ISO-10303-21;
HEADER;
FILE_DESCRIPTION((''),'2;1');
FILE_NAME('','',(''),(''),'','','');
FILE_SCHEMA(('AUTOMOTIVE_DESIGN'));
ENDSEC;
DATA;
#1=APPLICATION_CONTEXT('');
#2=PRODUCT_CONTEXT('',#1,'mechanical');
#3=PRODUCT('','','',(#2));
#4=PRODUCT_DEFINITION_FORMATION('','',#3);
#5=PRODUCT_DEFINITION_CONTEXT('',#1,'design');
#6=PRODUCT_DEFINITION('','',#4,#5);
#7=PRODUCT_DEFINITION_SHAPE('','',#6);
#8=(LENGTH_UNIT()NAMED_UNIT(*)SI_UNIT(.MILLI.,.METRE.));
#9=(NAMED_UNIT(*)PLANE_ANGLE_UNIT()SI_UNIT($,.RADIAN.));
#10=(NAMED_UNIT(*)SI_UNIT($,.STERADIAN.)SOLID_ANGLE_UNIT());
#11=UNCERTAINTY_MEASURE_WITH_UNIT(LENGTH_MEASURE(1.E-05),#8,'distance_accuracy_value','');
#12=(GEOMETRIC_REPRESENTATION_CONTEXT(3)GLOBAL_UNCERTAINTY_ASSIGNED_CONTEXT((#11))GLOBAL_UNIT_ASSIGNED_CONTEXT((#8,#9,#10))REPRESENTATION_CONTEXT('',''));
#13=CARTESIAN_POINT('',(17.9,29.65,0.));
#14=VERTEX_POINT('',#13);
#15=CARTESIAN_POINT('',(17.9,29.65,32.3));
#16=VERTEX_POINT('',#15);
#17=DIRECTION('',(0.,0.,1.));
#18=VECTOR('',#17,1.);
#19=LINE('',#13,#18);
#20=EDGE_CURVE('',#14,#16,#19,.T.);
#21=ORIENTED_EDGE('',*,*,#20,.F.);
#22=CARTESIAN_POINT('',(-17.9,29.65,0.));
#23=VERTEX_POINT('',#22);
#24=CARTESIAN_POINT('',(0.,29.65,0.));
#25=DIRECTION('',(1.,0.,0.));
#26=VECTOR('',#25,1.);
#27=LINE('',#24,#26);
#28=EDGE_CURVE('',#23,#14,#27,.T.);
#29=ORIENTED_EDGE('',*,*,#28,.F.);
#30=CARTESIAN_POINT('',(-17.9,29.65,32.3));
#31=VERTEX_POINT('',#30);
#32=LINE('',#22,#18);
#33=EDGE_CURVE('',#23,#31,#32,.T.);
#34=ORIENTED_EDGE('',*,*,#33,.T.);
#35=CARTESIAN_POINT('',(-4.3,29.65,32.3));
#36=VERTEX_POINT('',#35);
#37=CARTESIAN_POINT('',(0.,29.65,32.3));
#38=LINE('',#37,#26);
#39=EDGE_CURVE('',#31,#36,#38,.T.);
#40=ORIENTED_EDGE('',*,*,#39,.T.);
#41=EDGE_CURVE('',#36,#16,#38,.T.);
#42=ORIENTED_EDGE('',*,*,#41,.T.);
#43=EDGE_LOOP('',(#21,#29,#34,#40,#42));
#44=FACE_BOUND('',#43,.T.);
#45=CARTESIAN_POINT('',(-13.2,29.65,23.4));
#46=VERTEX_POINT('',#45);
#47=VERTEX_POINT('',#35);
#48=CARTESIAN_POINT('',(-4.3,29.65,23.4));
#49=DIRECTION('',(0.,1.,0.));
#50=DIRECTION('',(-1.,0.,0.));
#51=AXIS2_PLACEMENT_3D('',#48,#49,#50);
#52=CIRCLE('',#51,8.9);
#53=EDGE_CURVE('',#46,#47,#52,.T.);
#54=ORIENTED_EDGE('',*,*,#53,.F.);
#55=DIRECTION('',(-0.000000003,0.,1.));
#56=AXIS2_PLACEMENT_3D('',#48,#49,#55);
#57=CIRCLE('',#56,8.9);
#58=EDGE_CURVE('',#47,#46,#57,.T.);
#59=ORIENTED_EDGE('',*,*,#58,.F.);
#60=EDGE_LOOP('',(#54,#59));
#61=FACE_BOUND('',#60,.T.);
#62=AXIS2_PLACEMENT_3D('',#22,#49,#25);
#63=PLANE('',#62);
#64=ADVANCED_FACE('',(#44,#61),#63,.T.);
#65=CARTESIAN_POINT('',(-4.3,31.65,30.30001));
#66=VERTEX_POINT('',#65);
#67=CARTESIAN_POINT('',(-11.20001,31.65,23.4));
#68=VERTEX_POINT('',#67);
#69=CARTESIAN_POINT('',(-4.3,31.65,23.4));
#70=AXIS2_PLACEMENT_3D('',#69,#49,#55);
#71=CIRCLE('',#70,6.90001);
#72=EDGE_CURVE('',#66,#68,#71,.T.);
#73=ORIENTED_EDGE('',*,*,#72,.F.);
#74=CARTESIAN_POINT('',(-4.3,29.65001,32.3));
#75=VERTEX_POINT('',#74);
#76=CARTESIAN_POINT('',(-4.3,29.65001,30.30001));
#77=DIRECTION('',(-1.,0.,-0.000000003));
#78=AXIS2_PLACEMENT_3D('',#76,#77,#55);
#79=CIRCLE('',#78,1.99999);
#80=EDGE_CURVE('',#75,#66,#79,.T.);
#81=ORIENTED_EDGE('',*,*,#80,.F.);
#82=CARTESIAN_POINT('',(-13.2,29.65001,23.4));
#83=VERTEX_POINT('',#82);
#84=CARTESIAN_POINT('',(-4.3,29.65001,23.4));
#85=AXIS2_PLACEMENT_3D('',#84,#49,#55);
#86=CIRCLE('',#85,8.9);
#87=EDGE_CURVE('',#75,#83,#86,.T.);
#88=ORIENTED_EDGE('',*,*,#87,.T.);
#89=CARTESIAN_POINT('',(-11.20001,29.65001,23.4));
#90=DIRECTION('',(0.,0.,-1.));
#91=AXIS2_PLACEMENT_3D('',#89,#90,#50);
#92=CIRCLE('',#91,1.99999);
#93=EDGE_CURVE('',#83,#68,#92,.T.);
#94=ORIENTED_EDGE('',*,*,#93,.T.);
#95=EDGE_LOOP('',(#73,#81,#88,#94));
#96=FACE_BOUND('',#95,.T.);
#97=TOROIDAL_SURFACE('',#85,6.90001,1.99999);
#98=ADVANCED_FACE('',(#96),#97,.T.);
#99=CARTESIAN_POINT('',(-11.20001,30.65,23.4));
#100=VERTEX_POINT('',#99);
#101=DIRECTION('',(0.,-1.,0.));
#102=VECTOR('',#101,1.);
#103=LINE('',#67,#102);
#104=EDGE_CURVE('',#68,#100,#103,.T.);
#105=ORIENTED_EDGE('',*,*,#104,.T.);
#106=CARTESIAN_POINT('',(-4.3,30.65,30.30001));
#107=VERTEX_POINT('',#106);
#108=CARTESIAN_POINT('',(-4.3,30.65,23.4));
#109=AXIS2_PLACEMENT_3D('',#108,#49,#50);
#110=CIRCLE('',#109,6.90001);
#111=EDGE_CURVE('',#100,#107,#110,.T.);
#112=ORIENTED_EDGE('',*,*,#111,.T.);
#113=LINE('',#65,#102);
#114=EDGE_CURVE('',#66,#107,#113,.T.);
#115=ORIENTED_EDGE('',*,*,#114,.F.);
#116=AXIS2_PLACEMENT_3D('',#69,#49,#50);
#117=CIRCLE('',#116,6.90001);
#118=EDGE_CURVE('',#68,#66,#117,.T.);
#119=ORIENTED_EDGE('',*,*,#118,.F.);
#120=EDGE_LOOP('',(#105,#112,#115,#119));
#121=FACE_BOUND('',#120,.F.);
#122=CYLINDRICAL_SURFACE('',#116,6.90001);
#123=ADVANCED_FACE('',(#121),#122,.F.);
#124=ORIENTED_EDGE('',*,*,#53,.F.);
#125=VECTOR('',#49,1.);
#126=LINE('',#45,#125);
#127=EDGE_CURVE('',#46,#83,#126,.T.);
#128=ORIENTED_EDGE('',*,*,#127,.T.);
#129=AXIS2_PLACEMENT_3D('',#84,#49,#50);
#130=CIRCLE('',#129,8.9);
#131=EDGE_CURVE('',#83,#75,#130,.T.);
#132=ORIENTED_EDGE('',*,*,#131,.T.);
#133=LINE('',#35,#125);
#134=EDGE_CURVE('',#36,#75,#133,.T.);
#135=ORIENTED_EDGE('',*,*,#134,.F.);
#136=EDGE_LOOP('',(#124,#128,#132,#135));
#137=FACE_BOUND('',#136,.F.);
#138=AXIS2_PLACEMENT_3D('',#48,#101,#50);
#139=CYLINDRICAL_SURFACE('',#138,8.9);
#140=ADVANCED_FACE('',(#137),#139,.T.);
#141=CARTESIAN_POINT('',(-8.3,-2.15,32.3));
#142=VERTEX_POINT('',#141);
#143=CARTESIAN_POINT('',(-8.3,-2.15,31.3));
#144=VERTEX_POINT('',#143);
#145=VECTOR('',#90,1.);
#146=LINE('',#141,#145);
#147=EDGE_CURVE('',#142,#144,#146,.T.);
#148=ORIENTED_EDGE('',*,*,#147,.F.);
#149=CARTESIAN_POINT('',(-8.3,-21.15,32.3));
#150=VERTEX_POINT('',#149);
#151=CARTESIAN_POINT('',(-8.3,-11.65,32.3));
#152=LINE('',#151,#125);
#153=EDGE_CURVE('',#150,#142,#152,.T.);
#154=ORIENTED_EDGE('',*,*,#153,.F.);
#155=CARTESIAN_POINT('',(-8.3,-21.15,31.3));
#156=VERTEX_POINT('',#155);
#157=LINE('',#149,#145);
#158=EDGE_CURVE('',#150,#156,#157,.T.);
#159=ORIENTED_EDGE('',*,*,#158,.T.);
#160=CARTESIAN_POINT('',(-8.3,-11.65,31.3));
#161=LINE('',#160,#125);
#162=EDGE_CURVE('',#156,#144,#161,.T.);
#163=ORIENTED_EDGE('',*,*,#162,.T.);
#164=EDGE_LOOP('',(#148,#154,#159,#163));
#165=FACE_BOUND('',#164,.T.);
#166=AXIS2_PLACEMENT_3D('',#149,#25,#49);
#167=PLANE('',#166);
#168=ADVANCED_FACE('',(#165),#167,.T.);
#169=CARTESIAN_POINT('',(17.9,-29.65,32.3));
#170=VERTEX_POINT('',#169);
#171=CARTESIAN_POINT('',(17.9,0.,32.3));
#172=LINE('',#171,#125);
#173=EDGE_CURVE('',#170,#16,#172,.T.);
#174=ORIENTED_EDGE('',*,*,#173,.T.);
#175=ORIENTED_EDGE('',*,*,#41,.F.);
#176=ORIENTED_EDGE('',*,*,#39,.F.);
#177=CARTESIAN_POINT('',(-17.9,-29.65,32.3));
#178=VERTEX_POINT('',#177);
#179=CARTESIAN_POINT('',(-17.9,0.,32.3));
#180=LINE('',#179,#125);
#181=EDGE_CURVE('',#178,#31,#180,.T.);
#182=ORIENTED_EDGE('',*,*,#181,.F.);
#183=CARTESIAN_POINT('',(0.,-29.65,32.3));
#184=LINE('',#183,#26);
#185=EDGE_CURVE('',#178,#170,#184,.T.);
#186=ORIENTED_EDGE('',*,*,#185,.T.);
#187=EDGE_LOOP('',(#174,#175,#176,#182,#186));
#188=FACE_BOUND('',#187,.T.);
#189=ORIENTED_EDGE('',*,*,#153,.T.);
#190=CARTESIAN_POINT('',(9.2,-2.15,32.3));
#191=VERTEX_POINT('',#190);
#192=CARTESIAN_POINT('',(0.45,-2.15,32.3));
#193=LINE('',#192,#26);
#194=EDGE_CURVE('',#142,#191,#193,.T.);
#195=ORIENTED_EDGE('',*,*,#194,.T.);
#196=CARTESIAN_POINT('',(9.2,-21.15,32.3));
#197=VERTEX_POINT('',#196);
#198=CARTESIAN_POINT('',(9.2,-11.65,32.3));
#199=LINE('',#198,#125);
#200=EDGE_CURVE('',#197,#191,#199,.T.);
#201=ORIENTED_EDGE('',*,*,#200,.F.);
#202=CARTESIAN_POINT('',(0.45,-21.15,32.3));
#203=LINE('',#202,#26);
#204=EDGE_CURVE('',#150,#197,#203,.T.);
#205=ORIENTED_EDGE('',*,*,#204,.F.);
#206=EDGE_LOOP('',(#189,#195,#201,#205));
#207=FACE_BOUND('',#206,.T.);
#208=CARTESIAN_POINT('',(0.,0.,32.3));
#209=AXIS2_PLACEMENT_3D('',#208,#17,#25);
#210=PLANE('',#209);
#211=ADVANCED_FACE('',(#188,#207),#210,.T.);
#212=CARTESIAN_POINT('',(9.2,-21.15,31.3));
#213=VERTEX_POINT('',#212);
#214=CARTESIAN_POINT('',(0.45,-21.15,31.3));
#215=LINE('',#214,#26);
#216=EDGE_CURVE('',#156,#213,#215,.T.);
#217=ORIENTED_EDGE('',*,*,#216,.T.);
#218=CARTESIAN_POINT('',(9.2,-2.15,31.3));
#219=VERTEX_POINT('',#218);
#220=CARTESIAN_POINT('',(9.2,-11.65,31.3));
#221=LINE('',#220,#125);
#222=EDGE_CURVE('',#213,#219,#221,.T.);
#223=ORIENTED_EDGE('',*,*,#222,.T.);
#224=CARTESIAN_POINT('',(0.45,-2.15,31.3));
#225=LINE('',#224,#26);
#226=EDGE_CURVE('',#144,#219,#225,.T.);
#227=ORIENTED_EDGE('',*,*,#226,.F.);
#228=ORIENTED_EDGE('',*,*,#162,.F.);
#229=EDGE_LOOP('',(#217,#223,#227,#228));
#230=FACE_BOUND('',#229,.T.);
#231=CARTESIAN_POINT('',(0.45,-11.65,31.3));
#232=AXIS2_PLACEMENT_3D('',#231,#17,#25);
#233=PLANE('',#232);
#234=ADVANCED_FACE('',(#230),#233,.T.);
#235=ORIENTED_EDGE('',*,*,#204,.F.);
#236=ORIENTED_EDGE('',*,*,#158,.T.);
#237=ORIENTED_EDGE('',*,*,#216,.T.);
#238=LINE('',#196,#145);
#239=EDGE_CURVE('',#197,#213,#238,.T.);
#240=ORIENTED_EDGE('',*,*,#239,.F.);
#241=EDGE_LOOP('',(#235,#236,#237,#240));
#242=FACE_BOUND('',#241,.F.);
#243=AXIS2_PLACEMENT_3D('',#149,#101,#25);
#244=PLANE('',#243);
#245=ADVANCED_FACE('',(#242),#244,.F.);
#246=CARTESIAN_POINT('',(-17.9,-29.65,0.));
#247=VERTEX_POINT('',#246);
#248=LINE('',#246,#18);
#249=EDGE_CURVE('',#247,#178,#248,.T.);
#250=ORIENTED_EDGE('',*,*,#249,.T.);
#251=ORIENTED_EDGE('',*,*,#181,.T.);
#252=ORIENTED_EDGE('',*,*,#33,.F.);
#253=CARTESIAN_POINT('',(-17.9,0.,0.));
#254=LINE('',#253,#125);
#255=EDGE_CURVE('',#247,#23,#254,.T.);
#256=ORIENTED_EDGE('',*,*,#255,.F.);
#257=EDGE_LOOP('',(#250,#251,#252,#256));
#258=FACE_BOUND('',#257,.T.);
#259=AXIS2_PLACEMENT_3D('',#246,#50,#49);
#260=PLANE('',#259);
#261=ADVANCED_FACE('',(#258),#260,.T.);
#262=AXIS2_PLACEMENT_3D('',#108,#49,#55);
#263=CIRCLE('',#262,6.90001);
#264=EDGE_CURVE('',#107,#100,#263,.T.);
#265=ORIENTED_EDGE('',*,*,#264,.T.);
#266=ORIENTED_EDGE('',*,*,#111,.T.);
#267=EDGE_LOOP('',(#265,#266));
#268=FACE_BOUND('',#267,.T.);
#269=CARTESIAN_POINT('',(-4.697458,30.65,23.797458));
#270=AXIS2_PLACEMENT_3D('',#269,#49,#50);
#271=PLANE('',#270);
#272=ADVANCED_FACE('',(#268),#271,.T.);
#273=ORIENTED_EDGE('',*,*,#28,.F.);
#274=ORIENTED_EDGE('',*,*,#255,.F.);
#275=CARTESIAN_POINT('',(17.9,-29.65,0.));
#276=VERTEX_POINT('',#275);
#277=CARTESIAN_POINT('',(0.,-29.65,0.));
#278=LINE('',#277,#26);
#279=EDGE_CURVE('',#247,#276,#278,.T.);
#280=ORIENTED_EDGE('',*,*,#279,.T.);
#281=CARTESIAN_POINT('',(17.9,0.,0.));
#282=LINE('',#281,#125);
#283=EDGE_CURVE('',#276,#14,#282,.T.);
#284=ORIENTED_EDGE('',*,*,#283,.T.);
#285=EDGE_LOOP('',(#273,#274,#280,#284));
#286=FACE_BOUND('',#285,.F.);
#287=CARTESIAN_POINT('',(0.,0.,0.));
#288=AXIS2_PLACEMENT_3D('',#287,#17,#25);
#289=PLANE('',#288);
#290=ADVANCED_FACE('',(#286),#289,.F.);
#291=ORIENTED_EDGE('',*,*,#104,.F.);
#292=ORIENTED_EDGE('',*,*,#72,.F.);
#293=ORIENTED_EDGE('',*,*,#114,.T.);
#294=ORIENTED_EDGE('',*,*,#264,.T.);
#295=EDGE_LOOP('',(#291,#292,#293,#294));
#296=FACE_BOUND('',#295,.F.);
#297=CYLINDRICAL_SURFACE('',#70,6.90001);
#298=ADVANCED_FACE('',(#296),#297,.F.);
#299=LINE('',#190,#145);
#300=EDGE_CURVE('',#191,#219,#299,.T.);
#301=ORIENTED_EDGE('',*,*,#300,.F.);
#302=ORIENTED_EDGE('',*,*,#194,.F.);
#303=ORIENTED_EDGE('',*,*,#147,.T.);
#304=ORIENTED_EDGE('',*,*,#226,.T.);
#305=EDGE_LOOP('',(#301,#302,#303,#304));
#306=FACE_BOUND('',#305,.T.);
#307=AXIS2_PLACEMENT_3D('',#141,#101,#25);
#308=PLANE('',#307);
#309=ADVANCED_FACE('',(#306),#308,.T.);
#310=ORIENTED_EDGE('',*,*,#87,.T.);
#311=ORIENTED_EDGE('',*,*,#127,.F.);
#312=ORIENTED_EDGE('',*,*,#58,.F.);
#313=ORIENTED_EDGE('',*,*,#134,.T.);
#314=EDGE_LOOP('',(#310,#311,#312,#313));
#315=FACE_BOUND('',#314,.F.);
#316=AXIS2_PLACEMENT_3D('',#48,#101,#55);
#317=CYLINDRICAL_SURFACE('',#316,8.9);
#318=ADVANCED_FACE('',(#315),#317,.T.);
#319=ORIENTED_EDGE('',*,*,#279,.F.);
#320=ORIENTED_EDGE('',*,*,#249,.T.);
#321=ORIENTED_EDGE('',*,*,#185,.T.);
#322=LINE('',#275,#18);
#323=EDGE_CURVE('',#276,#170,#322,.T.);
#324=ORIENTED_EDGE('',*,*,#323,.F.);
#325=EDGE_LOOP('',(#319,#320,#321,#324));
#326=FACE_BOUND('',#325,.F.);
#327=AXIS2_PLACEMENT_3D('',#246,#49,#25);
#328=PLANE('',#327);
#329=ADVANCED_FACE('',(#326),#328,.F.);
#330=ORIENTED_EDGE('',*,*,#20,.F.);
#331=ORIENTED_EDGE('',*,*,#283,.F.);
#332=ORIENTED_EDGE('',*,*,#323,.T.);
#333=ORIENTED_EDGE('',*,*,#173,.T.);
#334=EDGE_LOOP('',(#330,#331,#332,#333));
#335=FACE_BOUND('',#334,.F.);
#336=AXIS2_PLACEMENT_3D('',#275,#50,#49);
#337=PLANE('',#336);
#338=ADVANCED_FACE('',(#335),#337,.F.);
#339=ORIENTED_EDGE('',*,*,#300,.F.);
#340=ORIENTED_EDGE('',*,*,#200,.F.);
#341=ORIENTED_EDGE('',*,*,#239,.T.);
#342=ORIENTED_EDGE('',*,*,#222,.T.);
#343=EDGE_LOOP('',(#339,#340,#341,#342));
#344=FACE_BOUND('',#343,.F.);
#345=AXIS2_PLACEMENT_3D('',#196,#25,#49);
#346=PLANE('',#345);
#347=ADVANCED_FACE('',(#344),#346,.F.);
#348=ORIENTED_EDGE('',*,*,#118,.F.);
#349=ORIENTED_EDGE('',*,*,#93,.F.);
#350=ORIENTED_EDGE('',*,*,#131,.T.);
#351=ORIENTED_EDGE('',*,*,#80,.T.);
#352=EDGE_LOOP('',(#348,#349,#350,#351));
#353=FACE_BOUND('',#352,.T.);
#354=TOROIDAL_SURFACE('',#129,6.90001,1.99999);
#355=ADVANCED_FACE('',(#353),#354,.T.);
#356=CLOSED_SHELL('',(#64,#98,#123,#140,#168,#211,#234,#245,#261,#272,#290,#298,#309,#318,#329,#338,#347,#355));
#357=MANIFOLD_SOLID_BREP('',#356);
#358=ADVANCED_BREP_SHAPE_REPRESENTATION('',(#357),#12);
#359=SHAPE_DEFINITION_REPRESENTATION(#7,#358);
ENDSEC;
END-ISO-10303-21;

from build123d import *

# Parameters (mm, degrees)
F0_W     = 35.8
F0_H     = 59.3
F1_DEPTH = 32.3
F2_W     = 17.5
F2_H     = 19
F3_DEPTH = 1
F5_DEPTH = 2
F6_R     = 1.99999
F7_DEPTH = 1


# Not quite as in the source:
# - a fillet or chamfer is up to 0.001 mm smaller than in the source, because OpenCascade refuses the exact size


with BuildPart() as f1:
    # F0 (on Top) → F1 (new body)
    with BuildSketch(Plane.XY):
        Rectangle(F0_W, F0_H)
    extrude(amount=F1_DEPTH)

    # F2 (on face) → F3 (cut)
    with BuildSketch(Plane.XY.offset(32.3)):
        with Locations((0.45, -11.65)):
            Rectangle(F2_W, F2_H)
    extrude(amount=-F3_DEPTH, mode=Mode.SUBTRACT)

    # F4 (on face) → F5 (join)
    with BuildSketch(Plane(origin=(0, 29.65, 0), x_dir=(-1, 0, 0), z_dir=(0, 1, 0))):
        with BuildLine():
            ThreePointArc((4.3000000252, 32.3), (-1.9932503615, 17.1067496563), (13.2, 23.4))
            ThreePointArc((13.2, 23.4), (10.5932503615, 29.6932503437), (4.3000000252, 32.3))
        make_face()
    extrude(amount=F5_DEPTH)

    # F6 (radius 2 in the source; OpenCascade refuses exactly that, so slightly less here)
    f6_edges = [f1.edges().sort_by_distance(p)[0] for p in [
        (4.6, 31.65, 23.4),
    ]]
    fillet(f6_edges, radius=F6_R)

    # F7 (cut): a face of the model
    f7_faces = [f1.faces().sort_by_distance(p)[0] for p in [
        (-4.3, 31.65, 23.4),
    ]]
    extrude(f7_faces, amount=-F7_DEPTH, mode=Mode.SUBTRACT)


solid = f1.part
